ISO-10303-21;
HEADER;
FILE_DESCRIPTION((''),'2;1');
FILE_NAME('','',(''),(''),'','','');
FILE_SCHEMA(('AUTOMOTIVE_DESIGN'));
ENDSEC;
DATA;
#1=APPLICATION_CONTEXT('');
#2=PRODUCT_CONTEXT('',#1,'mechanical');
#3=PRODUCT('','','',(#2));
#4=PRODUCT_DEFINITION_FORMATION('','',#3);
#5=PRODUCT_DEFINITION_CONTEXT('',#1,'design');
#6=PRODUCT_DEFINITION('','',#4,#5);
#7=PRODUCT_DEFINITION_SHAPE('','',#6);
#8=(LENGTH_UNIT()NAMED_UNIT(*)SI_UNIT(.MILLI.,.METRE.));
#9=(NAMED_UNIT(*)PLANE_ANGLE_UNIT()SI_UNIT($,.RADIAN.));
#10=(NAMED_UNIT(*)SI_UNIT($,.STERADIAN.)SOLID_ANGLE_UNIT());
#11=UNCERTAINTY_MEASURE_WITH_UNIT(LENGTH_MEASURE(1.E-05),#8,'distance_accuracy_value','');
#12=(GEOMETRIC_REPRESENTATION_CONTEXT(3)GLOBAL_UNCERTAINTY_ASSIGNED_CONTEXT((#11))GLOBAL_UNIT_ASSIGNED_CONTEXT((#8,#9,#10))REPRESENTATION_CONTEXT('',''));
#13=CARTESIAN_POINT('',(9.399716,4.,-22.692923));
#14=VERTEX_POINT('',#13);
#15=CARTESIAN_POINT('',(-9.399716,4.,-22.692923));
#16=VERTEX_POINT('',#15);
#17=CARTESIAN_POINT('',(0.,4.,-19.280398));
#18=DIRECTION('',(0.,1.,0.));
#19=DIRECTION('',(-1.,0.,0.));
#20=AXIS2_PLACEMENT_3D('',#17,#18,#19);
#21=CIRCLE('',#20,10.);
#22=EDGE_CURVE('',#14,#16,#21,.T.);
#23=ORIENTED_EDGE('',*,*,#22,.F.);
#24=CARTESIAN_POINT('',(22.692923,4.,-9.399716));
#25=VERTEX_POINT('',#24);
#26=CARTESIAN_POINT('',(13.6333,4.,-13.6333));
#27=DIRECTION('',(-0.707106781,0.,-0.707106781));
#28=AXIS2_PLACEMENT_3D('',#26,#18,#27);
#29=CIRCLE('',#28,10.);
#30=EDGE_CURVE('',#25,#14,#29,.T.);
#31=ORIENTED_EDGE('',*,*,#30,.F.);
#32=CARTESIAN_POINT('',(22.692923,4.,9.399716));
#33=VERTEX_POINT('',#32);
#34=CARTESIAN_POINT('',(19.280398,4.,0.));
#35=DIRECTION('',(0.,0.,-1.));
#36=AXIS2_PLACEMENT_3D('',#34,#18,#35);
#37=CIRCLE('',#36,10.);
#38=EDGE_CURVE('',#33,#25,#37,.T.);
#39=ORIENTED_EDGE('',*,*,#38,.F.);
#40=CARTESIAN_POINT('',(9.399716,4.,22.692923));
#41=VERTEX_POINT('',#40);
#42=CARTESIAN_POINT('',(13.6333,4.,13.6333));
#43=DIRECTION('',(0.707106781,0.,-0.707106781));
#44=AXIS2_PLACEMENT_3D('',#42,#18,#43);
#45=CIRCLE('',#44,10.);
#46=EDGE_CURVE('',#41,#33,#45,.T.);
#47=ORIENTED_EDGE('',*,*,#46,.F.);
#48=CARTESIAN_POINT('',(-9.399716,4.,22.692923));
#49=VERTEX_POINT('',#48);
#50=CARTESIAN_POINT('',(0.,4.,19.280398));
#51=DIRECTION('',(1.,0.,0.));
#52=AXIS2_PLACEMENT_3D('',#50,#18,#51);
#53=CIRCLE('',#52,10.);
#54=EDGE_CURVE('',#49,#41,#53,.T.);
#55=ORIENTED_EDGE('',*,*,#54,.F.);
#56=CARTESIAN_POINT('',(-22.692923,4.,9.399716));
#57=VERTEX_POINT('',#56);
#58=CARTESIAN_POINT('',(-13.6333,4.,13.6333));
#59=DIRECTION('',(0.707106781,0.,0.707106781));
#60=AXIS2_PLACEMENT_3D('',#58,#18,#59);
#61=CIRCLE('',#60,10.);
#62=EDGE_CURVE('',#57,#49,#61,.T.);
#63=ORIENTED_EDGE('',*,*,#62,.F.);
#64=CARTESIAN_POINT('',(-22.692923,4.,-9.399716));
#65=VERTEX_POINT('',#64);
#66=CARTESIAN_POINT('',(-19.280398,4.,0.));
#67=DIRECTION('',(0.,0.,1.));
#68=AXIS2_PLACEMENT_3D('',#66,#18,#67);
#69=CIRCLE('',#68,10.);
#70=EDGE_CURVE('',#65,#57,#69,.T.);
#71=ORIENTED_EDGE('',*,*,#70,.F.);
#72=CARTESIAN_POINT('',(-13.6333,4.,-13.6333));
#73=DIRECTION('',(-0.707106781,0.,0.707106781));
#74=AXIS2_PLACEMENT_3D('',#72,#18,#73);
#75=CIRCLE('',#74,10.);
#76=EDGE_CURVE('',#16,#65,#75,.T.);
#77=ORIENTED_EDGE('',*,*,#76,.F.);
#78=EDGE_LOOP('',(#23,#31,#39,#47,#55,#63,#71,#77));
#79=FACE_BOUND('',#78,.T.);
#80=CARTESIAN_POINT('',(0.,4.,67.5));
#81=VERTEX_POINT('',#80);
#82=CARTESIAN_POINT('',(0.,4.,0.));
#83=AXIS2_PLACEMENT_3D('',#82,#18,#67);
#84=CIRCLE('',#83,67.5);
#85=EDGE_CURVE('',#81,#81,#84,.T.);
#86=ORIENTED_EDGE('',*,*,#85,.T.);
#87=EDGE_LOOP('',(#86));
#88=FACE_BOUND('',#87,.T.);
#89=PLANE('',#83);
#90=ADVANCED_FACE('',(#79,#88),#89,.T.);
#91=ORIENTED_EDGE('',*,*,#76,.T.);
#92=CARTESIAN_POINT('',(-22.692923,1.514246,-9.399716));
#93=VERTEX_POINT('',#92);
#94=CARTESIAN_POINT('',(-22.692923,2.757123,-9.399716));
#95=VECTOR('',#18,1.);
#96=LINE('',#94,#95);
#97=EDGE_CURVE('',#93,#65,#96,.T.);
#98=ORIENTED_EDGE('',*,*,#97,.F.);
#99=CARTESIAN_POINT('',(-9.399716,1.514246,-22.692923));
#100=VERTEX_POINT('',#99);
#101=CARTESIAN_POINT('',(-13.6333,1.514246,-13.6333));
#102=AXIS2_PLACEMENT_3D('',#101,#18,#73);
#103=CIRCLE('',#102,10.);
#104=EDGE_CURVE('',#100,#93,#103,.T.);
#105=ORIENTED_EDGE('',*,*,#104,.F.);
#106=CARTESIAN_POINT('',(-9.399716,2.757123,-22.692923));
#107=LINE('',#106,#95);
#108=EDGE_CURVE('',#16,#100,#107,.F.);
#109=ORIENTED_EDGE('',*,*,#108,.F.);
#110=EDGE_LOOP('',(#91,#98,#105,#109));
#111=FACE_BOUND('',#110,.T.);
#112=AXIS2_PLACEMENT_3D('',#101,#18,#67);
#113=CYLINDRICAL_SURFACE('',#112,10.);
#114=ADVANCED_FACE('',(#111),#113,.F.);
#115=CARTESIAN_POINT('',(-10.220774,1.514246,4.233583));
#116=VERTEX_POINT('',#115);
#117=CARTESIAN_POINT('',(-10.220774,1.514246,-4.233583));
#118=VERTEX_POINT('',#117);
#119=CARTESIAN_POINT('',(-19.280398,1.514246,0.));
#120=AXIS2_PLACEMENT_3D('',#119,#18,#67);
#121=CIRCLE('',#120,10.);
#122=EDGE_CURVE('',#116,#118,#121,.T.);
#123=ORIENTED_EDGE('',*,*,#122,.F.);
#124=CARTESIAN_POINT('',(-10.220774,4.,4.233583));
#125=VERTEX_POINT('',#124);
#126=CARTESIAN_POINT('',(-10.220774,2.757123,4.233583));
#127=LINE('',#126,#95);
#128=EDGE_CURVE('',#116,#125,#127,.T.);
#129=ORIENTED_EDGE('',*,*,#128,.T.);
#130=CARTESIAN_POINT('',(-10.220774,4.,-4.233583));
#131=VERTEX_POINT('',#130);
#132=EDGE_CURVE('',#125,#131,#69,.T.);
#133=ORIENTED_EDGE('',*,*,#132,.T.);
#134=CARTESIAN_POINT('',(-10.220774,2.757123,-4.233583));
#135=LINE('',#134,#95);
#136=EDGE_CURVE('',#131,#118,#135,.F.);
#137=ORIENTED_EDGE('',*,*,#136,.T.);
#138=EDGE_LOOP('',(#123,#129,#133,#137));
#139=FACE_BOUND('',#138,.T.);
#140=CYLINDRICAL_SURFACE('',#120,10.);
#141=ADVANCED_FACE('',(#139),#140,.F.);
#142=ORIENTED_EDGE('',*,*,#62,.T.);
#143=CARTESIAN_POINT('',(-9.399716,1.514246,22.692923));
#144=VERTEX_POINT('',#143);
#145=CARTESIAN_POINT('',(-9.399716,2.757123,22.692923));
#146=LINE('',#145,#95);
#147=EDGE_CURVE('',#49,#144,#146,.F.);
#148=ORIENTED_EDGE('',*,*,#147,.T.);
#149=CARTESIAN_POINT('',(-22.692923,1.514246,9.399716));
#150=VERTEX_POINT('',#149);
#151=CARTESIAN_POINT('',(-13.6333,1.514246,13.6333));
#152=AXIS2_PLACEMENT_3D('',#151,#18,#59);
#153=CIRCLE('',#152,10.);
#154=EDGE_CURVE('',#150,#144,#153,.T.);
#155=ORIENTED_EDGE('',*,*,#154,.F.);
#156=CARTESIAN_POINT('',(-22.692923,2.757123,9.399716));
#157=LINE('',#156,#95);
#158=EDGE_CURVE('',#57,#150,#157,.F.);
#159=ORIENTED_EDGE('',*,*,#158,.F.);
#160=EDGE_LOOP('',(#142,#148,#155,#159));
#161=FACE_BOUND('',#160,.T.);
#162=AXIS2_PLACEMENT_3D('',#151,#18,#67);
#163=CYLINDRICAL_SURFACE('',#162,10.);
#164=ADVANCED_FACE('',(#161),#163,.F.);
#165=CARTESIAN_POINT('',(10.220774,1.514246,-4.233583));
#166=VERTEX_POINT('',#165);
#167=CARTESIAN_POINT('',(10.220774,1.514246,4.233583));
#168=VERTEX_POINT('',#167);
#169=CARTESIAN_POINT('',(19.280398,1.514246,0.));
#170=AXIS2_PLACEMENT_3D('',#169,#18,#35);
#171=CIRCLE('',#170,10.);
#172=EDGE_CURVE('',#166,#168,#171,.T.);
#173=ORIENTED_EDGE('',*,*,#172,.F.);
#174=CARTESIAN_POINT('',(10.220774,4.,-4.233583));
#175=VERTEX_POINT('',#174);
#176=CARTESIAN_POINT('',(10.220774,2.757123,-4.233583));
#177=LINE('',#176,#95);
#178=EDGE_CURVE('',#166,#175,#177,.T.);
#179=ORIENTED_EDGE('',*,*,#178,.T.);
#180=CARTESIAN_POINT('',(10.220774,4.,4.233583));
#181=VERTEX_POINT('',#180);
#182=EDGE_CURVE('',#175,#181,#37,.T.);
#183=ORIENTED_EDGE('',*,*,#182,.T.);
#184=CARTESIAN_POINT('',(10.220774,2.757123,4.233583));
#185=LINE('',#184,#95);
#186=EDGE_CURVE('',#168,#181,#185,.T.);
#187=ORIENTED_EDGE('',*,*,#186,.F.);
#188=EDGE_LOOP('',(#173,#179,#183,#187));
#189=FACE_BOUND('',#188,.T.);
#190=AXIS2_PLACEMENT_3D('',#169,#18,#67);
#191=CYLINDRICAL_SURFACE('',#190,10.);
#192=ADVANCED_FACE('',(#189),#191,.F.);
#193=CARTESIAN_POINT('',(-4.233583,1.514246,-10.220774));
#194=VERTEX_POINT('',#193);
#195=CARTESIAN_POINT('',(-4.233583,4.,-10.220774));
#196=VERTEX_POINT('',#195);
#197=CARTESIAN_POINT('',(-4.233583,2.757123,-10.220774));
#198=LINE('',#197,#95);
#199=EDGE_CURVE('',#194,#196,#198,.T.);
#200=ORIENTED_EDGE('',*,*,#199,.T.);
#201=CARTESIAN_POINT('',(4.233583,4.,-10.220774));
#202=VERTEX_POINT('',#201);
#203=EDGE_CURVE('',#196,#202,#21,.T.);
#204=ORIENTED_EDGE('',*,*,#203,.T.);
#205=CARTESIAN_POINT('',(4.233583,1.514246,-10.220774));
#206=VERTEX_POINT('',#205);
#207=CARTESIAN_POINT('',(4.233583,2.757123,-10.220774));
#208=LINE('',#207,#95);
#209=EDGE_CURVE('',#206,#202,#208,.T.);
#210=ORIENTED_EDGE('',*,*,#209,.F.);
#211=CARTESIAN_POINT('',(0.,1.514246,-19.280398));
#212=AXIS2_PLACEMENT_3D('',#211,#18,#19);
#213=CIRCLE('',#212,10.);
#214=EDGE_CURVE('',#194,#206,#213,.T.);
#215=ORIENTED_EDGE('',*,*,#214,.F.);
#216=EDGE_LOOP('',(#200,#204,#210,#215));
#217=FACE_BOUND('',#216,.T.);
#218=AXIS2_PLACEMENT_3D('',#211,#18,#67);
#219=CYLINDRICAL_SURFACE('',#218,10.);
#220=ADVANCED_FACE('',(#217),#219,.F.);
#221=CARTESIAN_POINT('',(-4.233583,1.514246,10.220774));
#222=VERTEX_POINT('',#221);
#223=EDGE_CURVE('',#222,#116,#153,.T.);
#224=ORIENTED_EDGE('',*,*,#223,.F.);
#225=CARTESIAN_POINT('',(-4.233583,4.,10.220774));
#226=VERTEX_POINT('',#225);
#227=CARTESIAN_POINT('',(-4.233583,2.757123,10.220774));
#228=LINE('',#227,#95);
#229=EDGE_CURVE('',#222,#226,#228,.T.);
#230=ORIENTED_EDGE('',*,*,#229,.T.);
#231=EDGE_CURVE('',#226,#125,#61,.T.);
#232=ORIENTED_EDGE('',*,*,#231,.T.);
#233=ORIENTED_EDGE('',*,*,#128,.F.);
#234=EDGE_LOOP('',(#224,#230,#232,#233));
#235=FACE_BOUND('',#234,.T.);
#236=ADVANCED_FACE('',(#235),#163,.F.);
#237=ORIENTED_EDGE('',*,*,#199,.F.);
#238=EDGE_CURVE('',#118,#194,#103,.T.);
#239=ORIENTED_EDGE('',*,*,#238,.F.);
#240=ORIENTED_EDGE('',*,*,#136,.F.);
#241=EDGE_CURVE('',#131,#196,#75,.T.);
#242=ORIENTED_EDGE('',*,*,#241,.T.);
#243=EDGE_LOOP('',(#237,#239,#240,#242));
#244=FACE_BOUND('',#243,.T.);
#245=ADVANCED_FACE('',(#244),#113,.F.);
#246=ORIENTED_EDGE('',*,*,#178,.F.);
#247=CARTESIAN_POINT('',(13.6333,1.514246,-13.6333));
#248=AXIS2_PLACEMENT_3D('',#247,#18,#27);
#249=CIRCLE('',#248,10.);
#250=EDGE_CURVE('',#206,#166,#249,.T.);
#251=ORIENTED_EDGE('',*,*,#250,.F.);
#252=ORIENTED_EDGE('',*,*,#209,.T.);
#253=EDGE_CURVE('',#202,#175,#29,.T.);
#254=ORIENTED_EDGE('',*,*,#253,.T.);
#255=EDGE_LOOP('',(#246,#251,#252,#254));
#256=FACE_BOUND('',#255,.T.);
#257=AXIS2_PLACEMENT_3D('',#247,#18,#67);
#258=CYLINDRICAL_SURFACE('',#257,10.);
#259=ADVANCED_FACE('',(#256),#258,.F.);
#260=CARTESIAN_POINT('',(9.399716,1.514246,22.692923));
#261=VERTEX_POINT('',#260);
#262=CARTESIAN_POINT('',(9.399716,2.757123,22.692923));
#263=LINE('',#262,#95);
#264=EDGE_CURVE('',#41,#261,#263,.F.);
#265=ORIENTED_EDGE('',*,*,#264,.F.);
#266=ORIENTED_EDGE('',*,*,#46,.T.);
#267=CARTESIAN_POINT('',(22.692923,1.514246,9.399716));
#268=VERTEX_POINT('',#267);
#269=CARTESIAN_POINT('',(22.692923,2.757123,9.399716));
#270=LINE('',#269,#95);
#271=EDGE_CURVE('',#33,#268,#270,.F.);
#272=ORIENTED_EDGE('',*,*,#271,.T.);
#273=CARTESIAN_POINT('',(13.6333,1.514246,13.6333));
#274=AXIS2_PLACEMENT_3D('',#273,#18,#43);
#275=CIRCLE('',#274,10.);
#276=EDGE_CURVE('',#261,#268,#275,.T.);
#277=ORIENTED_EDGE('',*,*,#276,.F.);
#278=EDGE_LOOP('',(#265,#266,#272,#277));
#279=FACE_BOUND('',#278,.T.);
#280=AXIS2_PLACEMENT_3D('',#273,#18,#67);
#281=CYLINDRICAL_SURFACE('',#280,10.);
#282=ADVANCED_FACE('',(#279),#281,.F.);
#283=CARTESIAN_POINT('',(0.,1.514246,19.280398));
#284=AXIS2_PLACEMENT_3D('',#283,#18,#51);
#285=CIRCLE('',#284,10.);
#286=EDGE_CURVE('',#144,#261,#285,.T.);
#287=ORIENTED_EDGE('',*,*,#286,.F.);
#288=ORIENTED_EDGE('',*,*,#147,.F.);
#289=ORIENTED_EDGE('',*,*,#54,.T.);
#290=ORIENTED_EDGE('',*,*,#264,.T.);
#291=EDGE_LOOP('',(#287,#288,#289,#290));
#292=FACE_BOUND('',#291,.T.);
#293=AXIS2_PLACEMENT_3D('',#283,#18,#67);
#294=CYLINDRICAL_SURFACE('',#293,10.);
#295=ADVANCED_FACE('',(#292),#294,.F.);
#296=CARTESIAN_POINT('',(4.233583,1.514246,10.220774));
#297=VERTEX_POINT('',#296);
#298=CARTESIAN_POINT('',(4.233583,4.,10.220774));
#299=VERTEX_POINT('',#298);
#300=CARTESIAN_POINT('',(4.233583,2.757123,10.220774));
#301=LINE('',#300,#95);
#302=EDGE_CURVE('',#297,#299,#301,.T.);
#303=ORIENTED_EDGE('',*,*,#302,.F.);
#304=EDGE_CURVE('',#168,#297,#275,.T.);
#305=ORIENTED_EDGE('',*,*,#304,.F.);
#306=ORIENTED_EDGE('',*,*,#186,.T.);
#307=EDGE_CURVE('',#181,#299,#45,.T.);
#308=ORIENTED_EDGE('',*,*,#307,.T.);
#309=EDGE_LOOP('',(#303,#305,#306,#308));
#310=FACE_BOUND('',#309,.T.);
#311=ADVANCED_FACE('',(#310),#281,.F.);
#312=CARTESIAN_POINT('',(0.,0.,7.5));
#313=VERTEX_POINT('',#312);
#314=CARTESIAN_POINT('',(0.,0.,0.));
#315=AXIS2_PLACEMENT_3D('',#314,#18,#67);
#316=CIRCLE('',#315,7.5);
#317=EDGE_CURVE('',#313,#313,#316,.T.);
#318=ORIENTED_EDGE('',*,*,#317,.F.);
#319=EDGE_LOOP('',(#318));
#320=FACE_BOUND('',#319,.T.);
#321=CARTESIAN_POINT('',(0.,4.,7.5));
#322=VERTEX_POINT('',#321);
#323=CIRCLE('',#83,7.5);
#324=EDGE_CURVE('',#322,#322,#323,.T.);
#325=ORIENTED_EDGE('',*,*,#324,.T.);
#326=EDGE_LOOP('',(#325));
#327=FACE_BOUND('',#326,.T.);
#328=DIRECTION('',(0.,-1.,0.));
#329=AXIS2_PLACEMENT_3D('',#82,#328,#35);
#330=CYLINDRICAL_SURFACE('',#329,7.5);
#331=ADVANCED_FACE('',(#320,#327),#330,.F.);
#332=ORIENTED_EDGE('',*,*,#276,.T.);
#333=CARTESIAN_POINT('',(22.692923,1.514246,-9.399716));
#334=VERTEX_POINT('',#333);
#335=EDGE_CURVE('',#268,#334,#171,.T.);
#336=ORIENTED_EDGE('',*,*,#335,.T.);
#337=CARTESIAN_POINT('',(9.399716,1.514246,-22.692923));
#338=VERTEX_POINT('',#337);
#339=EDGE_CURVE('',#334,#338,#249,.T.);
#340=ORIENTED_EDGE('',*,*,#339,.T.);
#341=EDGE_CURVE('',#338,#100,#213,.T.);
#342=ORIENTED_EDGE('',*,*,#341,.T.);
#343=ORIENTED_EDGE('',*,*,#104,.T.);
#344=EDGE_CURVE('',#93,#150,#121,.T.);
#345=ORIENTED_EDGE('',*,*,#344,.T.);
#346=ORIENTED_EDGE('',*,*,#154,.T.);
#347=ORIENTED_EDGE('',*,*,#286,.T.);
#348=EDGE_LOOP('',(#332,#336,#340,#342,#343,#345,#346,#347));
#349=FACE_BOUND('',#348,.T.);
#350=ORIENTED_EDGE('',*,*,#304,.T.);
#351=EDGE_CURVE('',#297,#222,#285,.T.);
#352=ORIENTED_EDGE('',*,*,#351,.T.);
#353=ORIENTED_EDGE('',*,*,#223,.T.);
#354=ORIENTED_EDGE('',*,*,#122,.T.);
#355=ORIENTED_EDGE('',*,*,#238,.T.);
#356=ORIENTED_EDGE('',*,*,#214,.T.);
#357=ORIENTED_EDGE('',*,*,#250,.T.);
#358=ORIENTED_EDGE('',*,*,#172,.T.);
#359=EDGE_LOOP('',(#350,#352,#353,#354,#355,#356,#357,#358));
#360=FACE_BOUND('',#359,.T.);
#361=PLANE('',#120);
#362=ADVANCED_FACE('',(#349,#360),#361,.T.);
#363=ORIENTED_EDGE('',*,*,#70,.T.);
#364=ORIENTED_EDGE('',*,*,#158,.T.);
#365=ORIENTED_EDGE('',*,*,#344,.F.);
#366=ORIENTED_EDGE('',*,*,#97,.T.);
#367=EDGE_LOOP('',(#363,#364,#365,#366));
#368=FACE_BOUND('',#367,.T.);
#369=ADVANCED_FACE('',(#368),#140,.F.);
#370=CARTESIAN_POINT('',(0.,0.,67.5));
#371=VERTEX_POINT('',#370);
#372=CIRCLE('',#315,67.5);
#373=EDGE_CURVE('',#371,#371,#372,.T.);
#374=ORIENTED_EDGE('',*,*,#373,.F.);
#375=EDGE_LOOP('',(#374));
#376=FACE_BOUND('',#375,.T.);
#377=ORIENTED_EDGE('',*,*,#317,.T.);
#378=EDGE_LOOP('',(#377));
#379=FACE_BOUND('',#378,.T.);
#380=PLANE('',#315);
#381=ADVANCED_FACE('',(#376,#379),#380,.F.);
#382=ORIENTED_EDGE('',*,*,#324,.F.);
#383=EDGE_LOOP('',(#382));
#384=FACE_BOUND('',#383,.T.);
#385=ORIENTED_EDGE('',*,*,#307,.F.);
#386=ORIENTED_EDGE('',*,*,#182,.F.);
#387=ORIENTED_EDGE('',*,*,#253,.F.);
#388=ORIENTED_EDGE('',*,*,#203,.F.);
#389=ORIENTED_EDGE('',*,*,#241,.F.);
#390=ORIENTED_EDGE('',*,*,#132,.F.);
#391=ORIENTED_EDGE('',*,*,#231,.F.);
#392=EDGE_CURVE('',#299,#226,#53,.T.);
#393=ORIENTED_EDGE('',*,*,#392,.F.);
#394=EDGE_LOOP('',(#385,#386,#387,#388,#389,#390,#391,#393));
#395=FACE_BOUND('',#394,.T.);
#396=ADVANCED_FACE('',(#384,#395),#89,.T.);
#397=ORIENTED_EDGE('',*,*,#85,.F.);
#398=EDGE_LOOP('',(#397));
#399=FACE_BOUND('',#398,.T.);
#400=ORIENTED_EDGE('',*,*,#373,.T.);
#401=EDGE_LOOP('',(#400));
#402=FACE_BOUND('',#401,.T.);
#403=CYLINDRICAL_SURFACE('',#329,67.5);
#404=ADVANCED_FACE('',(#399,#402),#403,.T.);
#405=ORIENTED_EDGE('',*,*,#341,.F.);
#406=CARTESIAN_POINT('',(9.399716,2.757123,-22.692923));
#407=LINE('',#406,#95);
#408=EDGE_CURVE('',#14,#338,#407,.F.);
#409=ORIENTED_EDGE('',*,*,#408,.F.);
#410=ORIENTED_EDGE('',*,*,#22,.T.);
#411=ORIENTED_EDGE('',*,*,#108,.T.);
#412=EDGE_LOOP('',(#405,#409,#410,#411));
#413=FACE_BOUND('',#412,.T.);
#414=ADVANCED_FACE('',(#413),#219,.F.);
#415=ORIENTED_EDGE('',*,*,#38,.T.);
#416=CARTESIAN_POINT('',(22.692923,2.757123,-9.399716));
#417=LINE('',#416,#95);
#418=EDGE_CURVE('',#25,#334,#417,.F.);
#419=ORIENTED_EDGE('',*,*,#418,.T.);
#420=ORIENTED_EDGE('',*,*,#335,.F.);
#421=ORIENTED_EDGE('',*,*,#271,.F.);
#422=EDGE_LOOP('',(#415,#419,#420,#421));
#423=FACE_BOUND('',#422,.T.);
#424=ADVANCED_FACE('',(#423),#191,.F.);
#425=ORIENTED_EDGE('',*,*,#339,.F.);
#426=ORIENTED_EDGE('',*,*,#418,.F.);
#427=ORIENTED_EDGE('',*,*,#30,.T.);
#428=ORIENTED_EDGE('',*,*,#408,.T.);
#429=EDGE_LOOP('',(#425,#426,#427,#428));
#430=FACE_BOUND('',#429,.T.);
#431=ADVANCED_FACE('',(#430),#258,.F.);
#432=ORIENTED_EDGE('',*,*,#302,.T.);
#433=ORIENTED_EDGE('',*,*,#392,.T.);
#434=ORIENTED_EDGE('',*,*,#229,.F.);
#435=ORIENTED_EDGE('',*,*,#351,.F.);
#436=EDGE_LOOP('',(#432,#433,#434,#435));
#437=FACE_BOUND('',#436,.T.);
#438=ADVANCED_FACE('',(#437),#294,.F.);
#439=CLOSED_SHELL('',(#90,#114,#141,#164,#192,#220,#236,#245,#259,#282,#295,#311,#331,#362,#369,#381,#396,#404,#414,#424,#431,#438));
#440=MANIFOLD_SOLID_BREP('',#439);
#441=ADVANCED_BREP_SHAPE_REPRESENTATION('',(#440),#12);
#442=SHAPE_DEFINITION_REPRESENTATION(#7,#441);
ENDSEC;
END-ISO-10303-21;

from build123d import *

# Parameters (mm, degrees)
SKETCH1_R           = 67.5
BOSS_EXTRUDE1_DEPTH = 4
SKETCH2_R           = 7.5
CUT_EXTRUDE1_DEPTH  = 96.543183954
SKETCH3_R           = 10
CUT_EXTRUDE2_DEPTH  = 2.485753536
CIRPATTERN1_COUNT   = 8


with BuildPart() as part:
    # Sketch1 → Boss-Extrude1 (new body)
    with BuildSketch(Plane(origin=(0, 0, 0), x_dir=(1, 0, 0), z_dir=(0, 1, 0))):
        Circle(SKETCH1_R)
    extrude(amount=BOSS_EXTRUDE1_DEPTH)

    # Sketch2 → Cut-Extrude1 (cut, through all)
    with BuildSketch(Plane(origin=(0, 0, 0), x_dir=(1, 0, 0), z_dir=(0, 1, 0))):
        Circle(SKETCH2_R)
    extrude(amount=CUT_EXTRUDE1_DEPTH, mode=Mode.SUBTRACT)

    # Sketch3 → Cut-Extrude2 (cut)
    with BuildSketch(Plane(origin=(0, 4, 0), x_dir=(1, 0, 0), z_dir=(0, 1, 0))):
        with Locations((-19.280397609, 0)):
            Circle(SKETCH3_R)
    cut_extrude2 = extrude(amount=-CUT_EXTRUDE2_DEPTH, mode=Mode.SUBTRACT)

    # CirPattern1: Cut-Extrude2 ×8 about axis
    cirpattern1_axis = Axis((0, 0, 0), (0, 1, 0))
    for i in range(1, CIRPATTERN1_COUNT):
        add(cut_extrude2.rotate(cirpattern1_axis, i * 360 / CIRPATTERN1_COUNT), mode=Mode.SUBTRACT)


solid = part.part
